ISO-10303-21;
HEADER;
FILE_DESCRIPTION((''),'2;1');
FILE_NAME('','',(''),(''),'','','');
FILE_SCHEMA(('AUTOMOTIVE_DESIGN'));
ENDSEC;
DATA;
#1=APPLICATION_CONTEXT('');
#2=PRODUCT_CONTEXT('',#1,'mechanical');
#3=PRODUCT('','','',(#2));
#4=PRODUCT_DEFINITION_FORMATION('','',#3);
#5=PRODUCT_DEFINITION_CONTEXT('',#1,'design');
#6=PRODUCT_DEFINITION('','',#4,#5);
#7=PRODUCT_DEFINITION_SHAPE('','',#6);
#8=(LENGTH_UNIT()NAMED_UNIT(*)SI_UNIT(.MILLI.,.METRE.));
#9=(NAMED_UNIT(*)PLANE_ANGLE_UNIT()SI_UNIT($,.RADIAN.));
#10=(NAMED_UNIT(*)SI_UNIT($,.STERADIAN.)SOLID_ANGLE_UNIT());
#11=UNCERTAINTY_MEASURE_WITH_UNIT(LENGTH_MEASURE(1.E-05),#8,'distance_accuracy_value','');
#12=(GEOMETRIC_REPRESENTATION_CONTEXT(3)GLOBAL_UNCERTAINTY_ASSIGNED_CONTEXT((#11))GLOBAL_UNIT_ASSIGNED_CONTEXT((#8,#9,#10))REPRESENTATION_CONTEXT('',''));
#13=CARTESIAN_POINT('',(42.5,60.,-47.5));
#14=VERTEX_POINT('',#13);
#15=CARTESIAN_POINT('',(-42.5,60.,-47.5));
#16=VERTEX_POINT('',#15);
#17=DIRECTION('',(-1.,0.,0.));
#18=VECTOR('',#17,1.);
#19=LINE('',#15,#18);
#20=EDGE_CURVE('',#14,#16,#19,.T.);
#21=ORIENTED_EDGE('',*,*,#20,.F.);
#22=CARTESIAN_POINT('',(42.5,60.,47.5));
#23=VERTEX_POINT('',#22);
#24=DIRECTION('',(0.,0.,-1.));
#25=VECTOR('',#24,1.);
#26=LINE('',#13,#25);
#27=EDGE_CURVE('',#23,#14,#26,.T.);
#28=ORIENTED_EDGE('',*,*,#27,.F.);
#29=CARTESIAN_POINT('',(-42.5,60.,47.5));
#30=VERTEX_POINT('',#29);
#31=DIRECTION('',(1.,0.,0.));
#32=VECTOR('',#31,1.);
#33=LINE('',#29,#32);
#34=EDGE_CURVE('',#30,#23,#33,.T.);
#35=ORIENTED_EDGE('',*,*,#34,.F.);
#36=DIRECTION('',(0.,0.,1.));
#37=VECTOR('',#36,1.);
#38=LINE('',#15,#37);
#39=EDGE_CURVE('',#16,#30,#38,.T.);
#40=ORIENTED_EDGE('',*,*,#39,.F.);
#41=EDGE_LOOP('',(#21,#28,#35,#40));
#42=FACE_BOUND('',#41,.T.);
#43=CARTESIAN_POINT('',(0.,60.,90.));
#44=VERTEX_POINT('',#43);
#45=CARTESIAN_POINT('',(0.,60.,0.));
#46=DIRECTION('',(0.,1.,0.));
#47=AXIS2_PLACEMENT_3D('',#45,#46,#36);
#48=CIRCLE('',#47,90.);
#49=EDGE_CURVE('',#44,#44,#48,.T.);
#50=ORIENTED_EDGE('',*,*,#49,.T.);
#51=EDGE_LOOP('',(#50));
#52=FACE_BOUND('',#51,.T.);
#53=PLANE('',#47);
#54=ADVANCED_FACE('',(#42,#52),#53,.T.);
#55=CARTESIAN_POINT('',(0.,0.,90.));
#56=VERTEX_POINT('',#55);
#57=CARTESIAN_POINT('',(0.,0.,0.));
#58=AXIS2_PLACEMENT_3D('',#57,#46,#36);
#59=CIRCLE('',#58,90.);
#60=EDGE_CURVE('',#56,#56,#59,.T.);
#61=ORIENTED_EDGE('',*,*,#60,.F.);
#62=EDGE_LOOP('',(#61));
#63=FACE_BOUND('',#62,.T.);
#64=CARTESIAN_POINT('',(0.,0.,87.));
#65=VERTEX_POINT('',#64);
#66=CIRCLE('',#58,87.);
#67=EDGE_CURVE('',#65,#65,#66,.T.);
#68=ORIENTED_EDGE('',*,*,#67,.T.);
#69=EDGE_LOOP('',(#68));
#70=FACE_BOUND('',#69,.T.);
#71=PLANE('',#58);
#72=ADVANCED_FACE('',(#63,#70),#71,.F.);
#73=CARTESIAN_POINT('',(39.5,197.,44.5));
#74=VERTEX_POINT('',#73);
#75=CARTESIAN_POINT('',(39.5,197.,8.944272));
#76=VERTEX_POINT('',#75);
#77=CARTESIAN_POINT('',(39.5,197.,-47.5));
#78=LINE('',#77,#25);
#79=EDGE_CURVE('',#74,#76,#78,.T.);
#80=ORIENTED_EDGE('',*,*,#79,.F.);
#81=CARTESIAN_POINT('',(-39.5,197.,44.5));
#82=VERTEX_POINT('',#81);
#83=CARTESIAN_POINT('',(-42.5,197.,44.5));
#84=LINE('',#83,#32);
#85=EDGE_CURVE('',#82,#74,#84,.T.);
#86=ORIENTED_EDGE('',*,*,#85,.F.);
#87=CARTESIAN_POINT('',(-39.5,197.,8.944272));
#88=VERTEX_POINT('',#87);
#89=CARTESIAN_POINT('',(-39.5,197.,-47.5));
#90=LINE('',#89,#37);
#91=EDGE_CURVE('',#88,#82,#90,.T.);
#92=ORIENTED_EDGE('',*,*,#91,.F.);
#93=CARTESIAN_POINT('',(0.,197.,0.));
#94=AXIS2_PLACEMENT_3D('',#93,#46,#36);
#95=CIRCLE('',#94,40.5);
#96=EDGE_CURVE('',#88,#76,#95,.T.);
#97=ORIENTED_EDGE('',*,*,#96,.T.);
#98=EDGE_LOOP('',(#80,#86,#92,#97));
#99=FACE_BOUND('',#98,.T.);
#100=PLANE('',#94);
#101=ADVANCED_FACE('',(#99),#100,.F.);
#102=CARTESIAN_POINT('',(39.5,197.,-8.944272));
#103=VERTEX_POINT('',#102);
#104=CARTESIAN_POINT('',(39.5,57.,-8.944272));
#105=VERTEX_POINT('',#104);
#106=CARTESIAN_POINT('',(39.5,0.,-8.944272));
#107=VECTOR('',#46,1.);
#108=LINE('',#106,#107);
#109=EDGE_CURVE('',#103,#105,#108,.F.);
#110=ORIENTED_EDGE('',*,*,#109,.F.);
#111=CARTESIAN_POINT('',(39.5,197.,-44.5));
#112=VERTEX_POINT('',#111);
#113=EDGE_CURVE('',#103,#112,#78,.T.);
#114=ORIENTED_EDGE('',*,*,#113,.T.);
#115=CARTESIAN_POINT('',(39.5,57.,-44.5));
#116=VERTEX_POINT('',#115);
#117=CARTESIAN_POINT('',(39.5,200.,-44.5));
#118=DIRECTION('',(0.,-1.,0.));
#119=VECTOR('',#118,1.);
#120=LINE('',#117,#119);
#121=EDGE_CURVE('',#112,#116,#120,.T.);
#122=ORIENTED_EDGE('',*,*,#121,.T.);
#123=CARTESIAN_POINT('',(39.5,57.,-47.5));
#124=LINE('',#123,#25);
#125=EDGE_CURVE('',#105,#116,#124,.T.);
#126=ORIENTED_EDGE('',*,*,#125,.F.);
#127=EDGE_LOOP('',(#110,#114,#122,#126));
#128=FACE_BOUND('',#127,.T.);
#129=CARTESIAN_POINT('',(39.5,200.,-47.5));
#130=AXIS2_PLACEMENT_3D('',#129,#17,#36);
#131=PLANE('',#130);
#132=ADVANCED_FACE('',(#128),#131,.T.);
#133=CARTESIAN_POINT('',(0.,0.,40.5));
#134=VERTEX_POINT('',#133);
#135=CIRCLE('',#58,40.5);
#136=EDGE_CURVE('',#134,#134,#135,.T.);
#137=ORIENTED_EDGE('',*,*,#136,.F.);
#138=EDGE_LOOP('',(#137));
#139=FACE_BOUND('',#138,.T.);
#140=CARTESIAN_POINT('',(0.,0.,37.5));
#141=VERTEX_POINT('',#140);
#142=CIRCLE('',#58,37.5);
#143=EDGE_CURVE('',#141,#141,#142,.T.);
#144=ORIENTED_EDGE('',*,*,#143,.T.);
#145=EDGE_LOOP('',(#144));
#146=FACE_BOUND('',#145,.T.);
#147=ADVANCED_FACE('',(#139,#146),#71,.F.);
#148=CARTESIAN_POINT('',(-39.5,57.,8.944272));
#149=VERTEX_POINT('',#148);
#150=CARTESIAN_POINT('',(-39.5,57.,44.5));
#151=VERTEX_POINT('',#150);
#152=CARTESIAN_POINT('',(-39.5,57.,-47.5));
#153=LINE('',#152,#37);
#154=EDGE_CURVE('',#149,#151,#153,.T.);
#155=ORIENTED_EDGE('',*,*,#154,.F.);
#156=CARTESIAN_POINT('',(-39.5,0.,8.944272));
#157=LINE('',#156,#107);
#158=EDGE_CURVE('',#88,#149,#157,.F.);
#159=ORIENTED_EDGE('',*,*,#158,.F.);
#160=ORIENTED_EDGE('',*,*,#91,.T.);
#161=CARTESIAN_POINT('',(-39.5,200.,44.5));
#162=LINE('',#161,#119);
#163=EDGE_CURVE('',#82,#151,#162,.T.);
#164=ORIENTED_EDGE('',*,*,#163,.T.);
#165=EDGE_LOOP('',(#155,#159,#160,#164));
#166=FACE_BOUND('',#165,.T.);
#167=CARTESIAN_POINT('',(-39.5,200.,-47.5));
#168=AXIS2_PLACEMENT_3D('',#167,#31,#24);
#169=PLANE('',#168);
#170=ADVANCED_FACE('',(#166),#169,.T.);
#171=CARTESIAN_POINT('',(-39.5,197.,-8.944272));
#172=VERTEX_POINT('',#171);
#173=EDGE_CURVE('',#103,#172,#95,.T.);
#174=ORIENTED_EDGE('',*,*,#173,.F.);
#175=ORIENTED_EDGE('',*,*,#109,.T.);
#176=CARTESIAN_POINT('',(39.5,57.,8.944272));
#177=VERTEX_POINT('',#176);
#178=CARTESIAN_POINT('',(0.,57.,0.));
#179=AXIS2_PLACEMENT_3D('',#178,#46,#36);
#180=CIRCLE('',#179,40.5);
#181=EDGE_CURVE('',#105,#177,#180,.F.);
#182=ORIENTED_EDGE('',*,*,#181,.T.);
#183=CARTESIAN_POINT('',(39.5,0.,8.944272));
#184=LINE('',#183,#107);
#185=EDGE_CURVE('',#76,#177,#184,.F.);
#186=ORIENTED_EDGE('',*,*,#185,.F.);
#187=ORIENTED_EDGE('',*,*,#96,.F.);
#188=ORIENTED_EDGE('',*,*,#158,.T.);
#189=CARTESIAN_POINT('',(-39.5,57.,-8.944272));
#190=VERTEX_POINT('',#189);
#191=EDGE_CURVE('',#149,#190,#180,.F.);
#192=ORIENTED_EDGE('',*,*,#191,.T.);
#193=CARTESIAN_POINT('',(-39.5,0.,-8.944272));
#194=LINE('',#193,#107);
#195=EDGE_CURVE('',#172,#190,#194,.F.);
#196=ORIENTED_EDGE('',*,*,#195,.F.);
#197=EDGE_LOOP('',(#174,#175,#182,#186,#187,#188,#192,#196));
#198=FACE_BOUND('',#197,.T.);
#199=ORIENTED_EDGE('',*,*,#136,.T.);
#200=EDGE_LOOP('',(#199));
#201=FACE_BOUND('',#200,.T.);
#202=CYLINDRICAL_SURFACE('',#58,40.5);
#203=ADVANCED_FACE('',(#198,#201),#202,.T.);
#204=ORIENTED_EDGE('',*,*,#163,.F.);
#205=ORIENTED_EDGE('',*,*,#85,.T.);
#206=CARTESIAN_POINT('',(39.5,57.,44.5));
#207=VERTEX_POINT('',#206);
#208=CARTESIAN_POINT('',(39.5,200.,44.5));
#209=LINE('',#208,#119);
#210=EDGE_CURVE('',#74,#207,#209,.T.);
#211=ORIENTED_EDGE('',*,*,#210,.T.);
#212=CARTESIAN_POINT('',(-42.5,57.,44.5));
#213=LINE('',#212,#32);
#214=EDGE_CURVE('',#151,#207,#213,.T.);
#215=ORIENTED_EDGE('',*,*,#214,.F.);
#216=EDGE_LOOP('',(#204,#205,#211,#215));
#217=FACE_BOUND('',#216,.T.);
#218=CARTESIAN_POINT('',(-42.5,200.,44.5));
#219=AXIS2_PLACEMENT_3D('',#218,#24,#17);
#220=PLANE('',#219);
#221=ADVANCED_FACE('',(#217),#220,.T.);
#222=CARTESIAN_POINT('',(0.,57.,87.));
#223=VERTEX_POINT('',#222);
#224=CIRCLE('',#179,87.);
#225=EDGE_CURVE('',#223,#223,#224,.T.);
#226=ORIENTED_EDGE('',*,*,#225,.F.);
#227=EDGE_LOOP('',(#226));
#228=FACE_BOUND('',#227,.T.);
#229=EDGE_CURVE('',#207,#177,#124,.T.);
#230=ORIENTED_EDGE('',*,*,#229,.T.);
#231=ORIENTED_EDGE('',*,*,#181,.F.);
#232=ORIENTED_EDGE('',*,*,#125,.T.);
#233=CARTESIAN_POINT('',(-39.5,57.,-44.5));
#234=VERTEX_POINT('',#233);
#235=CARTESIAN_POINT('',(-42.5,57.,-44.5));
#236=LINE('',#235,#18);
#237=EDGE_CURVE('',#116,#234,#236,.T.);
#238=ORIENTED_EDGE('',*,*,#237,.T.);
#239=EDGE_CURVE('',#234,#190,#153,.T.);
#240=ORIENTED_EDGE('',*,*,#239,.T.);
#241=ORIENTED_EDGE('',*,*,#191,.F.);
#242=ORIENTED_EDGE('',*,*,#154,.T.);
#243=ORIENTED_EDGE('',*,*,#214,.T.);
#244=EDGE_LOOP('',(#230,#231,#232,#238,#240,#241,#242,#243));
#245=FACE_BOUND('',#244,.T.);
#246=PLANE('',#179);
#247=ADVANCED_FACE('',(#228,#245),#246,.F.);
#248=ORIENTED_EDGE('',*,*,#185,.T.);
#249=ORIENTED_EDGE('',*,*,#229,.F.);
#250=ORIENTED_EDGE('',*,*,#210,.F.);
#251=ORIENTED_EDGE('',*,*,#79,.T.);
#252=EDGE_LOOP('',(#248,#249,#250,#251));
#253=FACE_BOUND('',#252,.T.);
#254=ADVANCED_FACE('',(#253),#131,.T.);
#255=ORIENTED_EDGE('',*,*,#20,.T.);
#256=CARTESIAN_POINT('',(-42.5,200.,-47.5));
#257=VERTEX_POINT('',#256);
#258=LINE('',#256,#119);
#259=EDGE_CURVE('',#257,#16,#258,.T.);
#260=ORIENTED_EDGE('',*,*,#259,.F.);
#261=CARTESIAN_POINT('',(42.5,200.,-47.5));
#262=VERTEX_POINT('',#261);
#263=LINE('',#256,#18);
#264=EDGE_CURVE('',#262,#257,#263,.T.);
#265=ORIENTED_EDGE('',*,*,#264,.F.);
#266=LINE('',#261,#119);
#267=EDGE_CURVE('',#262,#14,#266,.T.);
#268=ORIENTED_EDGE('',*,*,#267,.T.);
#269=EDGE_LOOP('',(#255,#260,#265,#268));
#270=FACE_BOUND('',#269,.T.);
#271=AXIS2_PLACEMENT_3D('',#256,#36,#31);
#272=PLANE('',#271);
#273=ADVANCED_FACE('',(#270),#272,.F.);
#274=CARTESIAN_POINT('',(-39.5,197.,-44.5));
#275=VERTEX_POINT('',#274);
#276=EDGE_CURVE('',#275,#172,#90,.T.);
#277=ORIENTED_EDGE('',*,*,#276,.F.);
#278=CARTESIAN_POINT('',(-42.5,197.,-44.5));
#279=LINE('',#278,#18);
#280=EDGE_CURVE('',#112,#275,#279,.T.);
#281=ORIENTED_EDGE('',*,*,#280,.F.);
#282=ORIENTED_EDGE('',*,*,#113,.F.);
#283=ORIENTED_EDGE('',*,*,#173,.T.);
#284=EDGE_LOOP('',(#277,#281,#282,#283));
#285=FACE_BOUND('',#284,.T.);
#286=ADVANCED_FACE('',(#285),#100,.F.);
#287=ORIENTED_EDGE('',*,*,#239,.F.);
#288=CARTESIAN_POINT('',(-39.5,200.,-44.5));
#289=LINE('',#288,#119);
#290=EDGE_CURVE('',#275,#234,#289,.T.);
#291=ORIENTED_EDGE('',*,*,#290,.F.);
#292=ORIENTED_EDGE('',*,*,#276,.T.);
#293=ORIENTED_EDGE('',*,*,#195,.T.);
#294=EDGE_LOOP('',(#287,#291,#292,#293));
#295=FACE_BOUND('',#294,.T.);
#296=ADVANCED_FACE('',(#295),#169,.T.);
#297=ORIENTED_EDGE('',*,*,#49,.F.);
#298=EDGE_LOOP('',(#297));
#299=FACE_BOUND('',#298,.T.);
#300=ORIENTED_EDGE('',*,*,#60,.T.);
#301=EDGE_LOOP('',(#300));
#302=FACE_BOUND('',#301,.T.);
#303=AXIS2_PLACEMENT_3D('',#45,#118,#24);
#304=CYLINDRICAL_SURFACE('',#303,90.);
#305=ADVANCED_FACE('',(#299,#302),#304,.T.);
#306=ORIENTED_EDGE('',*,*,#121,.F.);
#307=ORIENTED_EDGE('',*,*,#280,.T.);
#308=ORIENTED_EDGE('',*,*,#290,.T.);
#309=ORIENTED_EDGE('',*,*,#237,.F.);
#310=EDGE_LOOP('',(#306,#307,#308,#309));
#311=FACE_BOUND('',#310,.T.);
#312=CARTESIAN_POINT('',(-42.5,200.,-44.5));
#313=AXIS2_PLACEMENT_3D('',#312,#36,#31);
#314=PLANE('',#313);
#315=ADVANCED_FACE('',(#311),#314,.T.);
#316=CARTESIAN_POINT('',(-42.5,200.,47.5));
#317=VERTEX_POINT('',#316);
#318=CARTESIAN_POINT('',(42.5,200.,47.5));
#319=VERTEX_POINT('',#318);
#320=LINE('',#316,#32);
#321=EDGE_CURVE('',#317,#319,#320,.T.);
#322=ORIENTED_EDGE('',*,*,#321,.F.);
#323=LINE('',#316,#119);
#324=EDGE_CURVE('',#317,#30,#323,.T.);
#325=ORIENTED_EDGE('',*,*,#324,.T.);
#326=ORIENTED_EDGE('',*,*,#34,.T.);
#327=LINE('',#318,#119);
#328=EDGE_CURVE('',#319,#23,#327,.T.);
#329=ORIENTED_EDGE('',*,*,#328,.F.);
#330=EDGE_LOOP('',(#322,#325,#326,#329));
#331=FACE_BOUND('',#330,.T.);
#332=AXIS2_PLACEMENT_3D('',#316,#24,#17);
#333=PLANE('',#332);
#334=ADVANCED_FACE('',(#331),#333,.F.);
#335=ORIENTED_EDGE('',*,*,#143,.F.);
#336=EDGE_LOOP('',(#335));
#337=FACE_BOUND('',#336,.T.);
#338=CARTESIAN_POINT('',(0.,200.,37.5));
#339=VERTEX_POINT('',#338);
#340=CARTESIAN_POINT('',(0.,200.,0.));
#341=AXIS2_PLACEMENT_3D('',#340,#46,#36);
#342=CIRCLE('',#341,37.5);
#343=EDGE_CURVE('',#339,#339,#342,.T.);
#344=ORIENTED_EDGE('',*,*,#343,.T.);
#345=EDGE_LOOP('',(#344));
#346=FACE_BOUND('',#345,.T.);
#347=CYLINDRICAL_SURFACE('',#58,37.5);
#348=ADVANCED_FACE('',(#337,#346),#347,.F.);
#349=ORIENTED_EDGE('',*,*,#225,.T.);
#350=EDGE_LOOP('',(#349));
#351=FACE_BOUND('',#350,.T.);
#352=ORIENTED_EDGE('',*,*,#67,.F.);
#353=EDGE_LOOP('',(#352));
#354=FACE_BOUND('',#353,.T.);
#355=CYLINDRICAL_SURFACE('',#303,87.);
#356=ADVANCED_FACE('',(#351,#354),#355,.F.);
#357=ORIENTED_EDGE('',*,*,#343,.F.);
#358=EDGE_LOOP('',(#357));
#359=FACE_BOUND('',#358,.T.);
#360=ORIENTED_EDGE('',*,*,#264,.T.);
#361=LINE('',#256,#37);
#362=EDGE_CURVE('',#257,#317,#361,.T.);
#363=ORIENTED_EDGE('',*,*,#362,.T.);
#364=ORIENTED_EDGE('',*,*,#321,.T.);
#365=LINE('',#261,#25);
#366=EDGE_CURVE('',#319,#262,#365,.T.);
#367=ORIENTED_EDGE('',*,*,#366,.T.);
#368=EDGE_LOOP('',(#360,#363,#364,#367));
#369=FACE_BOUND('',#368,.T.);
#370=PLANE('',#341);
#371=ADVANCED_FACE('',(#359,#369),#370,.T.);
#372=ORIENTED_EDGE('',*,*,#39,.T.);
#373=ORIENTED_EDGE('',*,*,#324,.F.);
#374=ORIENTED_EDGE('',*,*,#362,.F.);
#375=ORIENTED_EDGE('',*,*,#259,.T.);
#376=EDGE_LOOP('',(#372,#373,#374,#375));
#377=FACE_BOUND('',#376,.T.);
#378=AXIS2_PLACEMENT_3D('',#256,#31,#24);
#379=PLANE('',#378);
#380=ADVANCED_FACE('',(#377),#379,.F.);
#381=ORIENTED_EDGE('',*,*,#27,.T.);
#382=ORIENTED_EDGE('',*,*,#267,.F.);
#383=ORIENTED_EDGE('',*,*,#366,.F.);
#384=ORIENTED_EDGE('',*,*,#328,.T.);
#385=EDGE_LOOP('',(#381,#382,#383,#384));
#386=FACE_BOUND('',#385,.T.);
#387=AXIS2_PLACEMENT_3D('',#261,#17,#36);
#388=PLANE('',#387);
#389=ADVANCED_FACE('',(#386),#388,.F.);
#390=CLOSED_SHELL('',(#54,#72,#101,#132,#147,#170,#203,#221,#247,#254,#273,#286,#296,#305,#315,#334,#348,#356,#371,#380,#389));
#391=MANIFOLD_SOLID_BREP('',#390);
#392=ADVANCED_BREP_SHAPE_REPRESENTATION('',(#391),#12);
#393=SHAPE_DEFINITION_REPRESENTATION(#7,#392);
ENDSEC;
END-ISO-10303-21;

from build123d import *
from build123d.topology import SkipClean

# Parameters (mm, degrees)
SKETCH_2_R            = 90
EXTRUDE_322_DEPTH     = 60
SKETCH_4_W            = 85
SKETCH_4_H            = 95
EXTRUDE_427_DEPTH     = 140
SKETCH_5_R            = 37.5
CUT_EXTRUDE_549_DEPTH = 238.065391823
SHELL_596_OUTLINE_R   = 87
SHELL_596_OUTLINE_R_2 = 40.5
SHELL_596_DEPTH       = 57
SHELL_START           = 57
SHELL_596_2_DEPTH     = 140


# Read off the part's stored shape, not the designer's step: Оболочка
with BuildPart() as part:
    # Эскиз2 → Extrude 322 (new body)
    with BuildSketch(Plane(origin=(0, 0, 0), x_dir=(1, 0, 0), z_dir=(0, 1, 0))):
        with Locations(Location((0, 0, 0), (0, 0, 270))):
            Circle(SKETCH_2_R)
    extrude(amount=EXTRUDE_322_DEPTH)

    # Эскиз4 → Extrude 427 (add)
    with BuildSketch(Plane(origin=(0, 60, 0), x_dir=(1, 0, 0), z_dir=(0, 1, 0))):
        Rectangle(SKETCH_4_W, SKETCH_4_H)
    extrude(amount=EXTRUDE_427_DEPTH)

    # Эскиз5 → Cut-Extrude 549 (cut, through all)
    with BuildSketch(Plane(origin=(0, 200, 0), x_dir=(1, 0, 0), z_dir=(0, 1, 0))):
        with Locations(Location((0, 0, 0), (0, 0, 270))):
            Circle(SKETCH_5_R)
    extrude(amount=-CUT_EXTRUDE_549_DEPTH, mode=Mode.SUBTRACT)

    # Shell 596 outline → Shell 596 (cut)
    with BuildSketch(Plane(origin=(0, 0, 0), x_dir=(1, 0, 0), z_dir=(0, 1, 0))):
        Circle(SHELL_596_OUTLINE_R)
        Circle(SHELL_596_OUTLINE_R_2, mode=Mode.SUBTRACT)
    extrude(amount=SHELL_596_DEPTH, mode=Mode.SUBTRACT)

    # Shell 596 2 outline → Shell 596 2 (cut)
    with SkipClean():  # the faces are left unmerged after this step: merging them gives an invalid solid
        with BuildSketch(Plane(origin=(0, 0, 0), x_dir=(1, 0, 0), z_dir=(0, 1, 0)).offset(SHELL_START)):
            with BuildLine():
                ThreePointArc((-39.5, 8.94427191), (0, 40.5), (39.5, 8.94427191))
                Line((39.5, 8.94427191), (39.5, 44.5))
                Line((39.5, 44.5), (-39.5, 44.5))
                Line((-39.5, 44.5), (-39.5, 8.94427191))
            make_face()
            with BuildLine():
                Line((39.5, -44.5), (39.5, -8.94427191))
                ThreePointArc((39.5, -8.94427191), (0, -40.5), (-39.5, -8.94427191))
                Line((-39.5, -8.94427191), (-39.5, -44.5))
                Line((-39.5, -44.5), (39.5, -44.5))
            make_face()
        extrude(amount=SHELL_596_2_DEPTH, mode=Mode.SUBTRACT)


solid = part.part
